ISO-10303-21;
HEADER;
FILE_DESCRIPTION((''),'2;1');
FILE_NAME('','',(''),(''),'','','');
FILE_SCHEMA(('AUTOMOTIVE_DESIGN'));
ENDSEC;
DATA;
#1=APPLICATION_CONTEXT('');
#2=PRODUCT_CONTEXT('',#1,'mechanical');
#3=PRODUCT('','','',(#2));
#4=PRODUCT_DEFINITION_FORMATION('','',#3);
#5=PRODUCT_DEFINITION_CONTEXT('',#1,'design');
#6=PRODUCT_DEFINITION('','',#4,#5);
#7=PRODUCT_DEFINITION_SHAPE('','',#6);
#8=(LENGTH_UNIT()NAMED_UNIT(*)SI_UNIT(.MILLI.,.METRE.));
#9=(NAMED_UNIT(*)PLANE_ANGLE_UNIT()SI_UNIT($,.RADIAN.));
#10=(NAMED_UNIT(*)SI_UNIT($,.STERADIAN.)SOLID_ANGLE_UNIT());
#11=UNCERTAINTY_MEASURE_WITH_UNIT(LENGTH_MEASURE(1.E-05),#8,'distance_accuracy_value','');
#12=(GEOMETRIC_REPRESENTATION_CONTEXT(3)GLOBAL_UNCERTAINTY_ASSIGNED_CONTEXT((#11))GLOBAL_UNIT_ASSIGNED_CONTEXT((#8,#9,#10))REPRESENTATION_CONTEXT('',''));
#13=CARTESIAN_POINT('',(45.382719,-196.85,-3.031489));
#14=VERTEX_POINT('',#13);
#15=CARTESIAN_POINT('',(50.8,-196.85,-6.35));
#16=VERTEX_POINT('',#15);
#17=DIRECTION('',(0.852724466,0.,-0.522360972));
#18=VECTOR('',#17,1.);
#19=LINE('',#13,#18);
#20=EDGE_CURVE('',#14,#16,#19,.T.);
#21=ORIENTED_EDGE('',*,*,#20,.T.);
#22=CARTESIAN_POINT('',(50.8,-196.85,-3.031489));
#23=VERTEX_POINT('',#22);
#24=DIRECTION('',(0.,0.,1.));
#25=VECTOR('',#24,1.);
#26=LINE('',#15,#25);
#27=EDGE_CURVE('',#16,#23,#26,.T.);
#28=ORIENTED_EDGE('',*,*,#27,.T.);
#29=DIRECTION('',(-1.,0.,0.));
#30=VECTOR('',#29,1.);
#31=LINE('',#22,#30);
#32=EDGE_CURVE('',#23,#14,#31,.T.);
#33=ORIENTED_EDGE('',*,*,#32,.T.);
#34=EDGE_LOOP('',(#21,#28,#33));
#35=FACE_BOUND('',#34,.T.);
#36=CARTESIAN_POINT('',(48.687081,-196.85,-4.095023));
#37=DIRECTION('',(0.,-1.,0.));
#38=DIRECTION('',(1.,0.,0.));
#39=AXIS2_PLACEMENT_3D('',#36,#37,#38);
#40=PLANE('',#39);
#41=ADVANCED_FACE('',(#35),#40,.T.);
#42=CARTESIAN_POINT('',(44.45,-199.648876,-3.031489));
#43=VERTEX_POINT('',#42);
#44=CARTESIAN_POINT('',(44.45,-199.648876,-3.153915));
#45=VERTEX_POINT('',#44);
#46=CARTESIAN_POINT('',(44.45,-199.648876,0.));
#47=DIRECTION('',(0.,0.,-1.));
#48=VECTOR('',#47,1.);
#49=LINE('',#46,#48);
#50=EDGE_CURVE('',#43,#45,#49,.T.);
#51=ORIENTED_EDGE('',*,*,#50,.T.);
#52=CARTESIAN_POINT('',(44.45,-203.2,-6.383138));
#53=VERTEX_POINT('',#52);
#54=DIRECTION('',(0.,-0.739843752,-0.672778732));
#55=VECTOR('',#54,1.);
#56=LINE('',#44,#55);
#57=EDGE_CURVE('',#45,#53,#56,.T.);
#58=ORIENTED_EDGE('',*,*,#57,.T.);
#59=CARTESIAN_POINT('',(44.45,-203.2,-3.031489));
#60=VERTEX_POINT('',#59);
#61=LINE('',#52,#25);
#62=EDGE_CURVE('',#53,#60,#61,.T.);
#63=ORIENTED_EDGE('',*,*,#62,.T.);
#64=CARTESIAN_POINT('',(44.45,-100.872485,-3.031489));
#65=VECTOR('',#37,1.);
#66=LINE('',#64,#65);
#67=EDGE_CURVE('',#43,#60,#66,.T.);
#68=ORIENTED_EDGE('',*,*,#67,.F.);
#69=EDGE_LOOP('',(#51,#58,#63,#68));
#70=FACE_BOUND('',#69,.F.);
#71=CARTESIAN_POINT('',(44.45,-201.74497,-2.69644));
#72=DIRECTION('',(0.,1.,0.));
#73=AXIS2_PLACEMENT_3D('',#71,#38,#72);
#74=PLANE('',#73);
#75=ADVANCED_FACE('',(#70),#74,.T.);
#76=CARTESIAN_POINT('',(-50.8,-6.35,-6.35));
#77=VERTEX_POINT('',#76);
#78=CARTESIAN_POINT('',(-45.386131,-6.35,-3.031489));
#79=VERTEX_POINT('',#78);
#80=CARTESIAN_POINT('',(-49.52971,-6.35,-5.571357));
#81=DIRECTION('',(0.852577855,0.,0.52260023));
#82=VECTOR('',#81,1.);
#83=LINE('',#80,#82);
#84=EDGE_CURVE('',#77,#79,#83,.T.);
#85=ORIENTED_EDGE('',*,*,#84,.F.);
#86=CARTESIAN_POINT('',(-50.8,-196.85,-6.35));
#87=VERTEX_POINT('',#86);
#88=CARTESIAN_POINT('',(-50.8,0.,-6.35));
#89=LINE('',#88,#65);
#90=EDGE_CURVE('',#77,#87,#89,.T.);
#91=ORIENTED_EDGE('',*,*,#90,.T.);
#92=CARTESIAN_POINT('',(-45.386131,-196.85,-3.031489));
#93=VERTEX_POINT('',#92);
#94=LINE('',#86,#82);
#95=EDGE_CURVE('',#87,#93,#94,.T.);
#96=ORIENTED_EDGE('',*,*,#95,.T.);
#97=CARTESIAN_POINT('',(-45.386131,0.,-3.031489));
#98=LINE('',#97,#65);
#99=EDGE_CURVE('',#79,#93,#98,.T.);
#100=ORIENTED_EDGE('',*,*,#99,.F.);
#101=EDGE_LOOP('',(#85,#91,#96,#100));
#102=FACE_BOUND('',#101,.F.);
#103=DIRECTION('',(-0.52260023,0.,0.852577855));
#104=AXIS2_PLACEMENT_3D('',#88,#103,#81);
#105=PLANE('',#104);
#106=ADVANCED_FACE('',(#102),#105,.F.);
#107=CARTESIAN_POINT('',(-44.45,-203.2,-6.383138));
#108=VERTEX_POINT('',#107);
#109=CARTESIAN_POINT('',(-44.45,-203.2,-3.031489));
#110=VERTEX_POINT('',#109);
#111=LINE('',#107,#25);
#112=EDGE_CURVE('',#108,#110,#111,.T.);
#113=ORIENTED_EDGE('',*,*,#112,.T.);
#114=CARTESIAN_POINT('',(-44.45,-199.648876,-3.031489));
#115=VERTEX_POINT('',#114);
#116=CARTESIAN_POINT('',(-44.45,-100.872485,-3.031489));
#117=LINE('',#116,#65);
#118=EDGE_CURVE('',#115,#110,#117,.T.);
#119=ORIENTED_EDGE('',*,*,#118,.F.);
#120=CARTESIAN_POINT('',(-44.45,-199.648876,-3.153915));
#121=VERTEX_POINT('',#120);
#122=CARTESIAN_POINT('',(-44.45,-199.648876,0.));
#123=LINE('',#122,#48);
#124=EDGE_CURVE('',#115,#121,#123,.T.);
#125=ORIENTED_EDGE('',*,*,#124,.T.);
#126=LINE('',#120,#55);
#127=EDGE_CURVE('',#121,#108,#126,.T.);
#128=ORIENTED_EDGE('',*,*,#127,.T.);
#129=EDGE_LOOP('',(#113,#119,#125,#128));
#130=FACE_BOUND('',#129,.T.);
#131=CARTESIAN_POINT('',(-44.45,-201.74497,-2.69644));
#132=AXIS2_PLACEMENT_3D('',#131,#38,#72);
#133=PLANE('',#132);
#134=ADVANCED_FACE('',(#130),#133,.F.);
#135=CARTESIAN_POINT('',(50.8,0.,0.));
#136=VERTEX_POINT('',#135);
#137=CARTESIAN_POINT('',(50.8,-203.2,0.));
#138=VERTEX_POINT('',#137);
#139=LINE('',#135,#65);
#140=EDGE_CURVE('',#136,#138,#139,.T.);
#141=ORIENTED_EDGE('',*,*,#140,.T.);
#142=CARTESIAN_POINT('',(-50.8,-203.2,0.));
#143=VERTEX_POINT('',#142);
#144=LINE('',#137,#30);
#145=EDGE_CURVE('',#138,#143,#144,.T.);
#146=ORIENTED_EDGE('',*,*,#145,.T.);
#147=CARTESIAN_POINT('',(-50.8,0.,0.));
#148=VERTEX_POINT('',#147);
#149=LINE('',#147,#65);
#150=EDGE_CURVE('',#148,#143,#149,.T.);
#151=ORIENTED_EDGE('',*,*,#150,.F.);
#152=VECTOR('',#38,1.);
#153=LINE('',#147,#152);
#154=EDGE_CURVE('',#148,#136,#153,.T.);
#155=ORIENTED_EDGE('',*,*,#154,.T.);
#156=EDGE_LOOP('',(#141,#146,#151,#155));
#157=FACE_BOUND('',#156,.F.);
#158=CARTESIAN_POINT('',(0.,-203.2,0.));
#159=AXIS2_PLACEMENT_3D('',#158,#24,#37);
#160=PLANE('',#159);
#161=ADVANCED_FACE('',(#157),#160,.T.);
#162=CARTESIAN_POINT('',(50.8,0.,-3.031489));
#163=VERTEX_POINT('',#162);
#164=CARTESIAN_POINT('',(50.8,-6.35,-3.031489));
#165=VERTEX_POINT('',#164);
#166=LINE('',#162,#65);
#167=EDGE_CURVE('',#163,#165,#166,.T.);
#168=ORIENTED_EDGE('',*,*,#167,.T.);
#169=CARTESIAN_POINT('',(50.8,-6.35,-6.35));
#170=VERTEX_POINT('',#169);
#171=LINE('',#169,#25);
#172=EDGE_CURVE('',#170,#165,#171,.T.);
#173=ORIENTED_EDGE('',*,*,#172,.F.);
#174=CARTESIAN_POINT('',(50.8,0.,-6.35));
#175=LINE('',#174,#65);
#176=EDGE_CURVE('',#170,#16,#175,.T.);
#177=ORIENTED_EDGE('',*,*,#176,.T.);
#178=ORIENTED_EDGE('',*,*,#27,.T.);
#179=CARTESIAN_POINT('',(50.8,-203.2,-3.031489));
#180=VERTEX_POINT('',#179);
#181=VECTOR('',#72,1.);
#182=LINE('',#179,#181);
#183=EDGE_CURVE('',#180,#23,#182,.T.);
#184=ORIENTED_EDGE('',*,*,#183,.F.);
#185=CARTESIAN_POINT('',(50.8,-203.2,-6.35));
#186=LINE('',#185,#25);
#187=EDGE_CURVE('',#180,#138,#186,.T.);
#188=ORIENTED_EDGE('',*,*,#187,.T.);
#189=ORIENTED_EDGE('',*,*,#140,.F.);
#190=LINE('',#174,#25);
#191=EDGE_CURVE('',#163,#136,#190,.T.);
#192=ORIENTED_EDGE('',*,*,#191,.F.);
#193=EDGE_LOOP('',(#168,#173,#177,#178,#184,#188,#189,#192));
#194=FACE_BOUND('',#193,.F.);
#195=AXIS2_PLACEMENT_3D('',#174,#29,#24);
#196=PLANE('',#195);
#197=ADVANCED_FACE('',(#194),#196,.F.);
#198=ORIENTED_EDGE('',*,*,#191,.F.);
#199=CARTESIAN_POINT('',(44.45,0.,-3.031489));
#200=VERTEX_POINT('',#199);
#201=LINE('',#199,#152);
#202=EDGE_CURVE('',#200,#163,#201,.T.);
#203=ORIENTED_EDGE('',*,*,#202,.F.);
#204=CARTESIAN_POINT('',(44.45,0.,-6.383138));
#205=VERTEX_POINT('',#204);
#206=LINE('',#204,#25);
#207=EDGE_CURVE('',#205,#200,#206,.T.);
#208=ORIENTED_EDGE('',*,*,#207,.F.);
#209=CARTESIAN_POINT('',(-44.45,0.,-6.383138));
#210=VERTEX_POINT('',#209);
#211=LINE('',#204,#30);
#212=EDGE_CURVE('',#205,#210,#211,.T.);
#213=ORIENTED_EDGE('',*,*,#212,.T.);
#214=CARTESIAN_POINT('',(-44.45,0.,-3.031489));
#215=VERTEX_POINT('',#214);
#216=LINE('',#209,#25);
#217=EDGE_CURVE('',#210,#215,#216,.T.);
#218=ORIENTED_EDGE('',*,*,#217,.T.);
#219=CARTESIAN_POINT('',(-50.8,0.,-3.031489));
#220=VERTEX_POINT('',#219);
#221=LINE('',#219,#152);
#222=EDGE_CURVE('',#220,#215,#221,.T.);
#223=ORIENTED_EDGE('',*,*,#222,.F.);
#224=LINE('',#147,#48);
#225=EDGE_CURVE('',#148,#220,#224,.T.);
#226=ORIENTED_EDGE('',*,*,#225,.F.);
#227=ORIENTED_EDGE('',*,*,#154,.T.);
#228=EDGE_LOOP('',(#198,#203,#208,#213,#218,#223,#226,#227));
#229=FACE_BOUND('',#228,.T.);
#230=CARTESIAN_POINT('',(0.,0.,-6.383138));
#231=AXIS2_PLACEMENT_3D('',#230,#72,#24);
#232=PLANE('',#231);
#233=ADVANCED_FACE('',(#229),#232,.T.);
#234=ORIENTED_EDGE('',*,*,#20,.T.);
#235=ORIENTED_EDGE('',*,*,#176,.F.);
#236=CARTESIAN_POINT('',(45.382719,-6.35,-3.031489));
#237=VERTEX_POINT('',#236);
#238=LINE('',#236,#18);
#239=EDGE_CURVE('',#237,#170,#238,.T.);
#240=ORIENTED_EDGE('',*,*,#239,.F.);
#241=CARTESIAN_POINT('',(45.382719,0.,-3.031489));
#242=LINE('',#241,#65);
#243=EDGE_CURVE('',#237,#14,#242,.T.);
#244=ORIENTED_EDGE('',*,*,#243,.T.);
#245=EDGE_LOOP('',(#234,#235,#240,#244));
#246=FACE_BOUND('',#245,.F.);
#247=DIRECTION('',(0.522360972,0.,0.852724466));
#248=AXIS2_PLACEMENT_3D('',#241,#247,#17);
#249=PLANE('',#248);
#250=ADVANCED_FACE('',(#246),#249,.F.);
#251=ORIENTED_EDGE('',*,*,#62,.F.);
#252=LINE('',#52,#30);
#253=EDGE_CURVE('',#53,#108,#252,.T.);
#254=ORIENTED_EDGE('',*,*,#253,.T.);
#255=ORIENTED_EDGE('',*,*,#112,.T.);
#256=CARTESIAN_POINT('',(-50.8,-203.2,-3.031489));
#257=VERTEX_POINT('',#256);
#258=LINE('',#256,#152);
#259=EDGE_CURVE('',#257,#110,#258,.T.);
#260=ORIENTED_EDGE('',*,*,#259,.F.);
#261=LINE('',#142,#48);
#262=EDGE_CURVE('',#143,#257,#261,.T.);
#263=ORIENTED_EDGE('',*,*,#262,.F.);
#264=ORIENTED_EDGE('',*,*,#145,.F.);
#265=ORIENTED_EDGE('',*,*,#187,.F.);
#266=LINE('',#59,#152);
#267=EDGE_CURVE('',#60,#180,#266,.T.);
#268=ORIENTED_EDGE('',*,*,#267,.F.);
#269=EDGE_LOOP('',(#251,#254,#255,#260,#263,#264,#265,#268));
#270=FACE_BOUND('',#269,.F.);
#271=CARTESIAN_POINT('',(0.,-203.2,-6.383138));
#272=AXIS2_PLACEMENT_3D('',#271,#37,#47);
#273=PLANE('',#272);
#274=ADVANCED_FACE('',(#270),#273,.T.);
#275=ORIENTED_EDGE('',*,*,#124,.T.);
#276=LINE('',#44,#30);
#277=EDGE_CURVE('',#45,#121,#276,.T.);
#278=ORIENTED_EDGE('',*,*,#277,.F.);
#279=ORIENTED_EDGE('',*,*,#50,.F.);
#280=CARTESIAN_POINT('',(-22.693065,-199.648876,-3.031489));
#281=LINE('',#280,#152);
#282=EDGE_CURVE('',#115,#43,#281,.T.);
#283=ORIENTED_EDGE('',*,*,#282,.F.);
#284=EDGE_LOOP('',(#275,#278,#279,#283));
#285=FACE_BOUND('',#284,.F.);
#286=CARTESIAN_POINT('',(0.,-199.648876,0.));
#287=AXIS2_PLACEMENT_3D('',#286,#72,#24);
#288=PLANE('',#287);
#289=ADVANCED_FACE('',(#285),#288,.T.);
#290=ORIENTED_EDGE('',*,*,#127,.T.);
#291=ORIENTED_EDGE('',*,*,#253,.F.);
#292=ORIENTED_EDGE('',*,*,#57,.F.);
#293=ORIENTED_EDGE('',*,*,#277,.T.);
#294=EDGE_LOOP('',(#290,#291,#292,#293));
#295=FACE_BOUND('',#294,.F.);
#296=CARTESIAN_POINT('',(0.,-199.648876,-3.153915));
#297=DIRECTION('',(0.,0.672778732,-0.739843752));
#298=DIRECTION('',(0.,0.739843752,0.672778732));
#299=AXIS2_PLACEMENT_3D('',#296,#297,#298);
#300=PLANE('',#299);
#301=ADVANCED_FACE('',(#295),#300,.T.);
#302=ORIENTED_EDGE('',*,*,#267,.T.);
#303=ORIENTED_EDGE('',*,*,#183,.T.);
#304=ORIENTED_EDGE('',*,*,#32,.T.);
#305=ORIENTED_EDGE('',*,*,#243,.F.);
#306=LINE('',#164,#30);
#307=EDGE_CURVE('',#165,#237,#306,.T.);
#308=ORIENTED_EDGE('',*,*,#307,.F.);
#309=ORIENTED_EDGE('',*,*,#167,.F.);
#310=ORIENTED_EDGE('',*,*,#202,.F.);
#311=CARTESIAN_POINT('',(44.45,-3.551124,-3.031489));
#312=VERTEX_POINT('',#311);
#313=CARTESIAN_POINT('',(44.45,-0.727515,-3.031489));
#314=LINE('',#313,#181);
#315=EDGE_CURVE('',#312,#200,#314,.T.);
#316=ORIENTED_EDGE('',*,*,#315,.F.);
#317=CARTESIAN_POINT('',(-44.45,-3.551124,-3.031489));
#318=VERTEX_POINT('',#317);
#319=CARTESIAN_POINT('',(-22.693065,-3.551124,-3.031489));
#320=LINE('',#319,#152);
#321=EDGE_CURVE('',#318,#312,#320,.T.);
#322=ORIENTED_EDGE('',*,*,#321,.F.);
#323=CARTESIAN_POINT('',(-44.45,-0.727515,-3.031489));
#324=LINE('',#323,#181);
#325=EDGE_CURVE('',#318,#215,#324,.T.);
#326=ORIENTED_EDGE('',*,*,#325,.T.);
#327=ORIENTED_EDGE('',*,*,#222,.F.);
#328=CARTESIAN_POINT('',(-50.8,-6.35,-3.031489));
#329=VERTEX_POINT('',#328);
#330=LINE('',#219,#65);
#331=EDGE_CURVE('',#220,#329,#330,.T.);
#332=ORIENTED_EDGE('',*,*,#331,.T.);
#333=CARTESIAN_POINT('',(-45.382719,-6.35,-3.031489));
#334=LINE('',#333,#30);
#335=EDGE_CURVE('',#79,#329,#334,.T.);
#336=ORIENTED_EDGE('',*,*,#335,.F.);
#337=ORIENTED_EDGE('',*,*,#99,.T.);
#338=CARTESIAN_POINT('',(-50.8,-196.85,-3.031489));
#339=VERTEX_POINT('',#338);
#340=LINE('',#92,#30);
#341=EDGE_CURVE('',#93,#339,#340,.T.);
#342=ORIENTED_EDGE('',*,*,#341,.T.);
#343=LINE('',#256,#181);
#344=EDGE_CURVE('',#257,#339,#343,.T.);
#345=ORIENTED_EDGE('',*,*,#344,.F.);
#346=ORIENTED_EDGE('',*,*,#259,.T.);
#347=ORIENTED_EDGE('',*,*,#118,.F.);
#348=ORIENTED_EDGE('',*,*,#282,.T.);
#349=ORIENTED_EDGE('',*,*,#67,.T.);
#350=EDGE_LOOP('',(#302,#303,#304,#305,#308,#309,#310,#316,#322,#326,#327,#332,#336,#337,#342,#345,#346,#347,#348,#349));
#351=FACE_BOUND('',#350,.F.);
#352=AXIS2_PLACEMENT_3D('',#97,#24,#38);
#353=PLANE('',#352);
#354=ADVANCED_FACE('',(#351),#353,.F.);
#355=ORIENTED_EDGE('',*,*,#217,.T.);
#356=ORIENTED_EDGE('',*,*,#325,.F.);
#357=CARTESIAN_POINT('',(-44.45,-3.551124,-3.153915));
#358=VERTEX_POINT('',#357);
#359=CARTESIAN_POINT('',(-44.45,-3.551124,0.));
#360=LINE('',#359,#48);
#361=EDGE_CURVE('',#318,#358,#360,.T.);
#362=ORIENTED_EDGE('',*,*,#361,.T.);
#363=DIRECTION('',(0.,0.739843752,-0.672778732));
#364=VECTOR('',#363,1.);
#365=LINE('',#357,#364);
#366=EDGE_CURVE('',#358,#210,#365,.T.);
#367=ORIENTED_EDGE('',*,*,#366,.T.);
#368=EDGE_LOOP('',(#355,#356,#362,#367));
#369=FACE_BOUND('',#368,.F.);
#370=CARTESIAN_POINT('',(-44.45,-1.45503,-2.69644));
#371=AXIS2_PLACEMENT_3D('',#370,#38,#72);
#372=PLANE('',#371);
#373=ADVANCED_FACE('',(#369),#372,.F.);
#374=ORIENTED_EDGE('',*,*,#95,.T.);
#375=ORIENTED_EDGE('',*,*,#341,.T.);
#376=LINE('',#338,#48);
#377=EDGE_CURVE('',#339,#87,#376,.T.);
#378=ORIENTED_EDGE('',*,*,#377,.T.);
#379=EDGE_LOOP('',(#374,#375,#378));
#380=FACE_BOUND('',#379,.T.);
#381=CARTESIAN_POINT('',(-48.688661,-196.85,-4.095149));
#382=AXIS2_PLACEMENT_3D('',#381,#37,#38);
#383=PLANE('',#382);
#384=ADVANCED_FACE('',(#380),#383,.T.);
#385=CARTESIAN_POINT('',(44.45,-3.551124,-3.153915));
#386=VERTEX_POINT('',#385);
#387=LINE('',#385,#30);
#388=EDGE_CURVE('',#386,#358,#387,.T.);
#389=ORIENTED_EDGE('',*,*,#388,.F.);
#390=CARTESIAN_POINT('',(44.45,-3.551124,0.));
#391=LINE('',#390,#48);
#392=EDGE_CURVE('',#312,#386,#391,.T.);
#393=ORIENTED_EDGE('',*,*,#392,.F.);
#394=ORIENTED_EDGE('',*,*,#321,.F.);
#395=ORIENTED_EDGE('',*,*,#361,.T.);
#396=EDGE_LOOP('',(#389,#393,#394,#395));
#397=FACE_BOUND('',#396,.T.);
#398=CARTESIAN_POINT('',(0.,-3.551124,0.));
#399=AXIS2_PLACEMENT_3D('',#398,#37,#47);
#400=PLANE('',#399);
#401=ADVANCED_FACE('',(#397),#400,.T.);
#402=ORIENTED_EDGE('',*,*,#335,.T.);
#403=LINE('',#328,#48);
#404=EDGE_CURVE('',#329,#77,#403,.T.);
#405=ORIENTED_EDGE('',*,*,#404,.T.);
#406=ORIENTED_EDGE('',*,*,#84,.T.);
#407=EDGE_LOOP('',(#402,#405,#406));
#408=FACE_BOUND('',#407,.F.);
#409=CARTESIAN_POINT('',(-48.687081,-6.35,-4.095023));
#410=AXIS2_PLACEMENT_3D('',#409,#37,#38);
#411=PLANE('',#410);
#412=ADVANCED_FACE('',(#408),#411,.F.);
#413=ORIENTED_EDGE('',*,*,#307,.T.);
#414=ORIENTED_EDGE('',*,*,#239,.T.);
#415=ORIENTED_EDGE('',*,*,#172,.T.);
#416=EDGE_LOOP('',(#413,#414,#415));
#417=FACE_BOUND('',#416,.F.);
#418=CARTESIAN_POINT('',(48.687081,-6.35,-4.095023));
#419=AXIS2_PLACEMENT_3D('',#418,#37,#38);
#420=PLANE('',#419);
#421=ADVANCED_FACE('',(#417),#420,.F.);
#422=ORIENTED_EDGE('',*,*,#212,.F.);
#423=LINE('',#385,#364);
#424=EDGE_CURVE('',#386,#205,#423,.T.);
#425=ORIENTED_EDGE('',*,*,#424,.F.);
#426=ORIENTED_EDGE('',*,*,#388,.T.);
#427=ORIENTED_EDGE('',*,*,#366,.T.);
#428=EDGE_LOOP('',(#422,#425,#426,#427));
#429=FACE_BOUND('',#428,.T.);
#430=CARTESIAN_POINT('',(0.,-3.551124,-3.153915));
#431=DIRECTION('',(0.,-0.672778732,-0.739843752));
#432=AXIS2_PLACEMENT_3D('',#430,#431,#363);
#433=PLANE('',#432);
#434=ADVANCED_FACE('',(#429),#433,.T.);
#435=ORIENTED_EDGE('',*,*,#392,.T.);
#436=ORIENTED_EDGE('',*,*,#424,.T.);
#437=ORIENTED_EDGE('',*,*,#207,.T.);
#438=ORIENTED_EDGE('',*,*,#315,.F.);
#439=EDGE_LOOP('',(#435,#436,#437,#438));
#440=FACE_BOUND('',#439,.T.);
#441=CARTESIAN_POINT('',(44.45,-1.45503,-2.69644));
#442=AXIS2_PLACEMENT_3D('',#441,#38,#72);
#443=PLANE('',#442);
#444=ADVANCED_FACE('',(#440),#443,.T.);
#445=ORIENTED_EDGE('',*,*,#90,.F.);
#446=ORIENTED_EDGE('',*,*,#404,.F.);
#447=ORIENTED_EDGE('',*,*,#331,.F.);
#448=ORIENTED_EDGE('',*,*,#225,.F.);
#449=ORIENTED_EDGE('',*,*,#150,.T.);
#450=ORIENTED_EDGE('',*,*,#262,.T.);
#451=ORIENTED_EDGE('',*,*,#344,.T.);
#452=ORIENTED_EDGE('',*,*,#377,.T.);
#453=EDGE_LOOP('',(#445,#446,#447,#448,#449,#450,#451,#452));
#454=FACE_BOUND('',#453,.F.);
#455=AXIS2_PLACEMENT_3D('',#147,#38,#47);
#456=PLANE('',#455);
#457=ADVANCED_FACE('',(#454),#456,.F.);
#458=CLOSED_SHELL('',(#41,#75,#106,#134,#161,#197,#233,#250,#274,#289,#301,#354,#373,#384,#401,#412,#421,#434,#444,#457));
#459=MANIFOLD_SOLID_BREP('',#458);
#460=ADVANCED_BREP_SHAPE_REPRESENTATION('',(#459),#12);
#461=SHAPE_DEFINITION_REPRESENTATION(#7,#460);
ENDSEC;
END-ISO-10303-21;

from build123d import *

# Parameters (mm, degrees)
F1_DEPTH = 203.2
F3_DEPTH = 44.45
F5_DEPTH = 6.35
F7_DEPTH = 6.35


# Not quite as in the source:
# - a pattern or mirror of a feature is missing from the dataset's text; its kind, count and spacing are read off the source's solid


with BuildPart() as f1:
    # F0 (on Front) → F1 (new body)
    with BuildSketch(Plane.XZ):
        Polygon((50.8, 0), (0, 0), (-50.8, 0), (-50.8, -6.35), (-45.386130618, -3.0314885393), (45.382719487, -3.0314885393), (50.8, -6.35), align=None)
    extrude(amount=F1_DEPTH)

    # F2 (on Right) → F3 (join, symmetric)
    with BuildSketch(Plane.YZ):
        Polygon((0, -6.3831382431), (0, 0), (-3.5511243623, 0), (-3.5511243623, -3.1539145857), align=None)
    f3 = extrude(amount=F3_DEPTH, both=True)

    # F3_copies: F3 across plane
    add(f3.mirror(Plane(origin=(0, -101.6, 0), x_dir=(0, 0, -1), z_dir=(0, -1, 0))))

    # F4 (on Front) → F5 (cut)
    with BuildSketch(Plane.XZ):
        Polygon((50.8, -3.0314885393), (45.382719487, -3.0314885393), (50.8, -6.35), align=None)
        Polygon((-50.8, -3.0314885393), (-50.8, -6.35), (-45.382719487, -3.0314885393), align=None)
    extrude(amount=F5_DEPTH, mode=Mode.SUBTRACT)

    # F6 (on face) → F7 (cut)
    with BuildSketch(Plane.XZ.offset(203.2)):
        Polygon((-50.8, -6.35), (-45.386130618, -3.0314885393), (-50.8, -3.0314885393), align=None)
        Polygon((50.8, -6.35), (50.8, -3.0314885393), (45.382719487, -3.0314885393), align=None)
    extrude(amount=-F7_DEPTH, mode=Mode.SUBTRACT)


solid = f1.part
